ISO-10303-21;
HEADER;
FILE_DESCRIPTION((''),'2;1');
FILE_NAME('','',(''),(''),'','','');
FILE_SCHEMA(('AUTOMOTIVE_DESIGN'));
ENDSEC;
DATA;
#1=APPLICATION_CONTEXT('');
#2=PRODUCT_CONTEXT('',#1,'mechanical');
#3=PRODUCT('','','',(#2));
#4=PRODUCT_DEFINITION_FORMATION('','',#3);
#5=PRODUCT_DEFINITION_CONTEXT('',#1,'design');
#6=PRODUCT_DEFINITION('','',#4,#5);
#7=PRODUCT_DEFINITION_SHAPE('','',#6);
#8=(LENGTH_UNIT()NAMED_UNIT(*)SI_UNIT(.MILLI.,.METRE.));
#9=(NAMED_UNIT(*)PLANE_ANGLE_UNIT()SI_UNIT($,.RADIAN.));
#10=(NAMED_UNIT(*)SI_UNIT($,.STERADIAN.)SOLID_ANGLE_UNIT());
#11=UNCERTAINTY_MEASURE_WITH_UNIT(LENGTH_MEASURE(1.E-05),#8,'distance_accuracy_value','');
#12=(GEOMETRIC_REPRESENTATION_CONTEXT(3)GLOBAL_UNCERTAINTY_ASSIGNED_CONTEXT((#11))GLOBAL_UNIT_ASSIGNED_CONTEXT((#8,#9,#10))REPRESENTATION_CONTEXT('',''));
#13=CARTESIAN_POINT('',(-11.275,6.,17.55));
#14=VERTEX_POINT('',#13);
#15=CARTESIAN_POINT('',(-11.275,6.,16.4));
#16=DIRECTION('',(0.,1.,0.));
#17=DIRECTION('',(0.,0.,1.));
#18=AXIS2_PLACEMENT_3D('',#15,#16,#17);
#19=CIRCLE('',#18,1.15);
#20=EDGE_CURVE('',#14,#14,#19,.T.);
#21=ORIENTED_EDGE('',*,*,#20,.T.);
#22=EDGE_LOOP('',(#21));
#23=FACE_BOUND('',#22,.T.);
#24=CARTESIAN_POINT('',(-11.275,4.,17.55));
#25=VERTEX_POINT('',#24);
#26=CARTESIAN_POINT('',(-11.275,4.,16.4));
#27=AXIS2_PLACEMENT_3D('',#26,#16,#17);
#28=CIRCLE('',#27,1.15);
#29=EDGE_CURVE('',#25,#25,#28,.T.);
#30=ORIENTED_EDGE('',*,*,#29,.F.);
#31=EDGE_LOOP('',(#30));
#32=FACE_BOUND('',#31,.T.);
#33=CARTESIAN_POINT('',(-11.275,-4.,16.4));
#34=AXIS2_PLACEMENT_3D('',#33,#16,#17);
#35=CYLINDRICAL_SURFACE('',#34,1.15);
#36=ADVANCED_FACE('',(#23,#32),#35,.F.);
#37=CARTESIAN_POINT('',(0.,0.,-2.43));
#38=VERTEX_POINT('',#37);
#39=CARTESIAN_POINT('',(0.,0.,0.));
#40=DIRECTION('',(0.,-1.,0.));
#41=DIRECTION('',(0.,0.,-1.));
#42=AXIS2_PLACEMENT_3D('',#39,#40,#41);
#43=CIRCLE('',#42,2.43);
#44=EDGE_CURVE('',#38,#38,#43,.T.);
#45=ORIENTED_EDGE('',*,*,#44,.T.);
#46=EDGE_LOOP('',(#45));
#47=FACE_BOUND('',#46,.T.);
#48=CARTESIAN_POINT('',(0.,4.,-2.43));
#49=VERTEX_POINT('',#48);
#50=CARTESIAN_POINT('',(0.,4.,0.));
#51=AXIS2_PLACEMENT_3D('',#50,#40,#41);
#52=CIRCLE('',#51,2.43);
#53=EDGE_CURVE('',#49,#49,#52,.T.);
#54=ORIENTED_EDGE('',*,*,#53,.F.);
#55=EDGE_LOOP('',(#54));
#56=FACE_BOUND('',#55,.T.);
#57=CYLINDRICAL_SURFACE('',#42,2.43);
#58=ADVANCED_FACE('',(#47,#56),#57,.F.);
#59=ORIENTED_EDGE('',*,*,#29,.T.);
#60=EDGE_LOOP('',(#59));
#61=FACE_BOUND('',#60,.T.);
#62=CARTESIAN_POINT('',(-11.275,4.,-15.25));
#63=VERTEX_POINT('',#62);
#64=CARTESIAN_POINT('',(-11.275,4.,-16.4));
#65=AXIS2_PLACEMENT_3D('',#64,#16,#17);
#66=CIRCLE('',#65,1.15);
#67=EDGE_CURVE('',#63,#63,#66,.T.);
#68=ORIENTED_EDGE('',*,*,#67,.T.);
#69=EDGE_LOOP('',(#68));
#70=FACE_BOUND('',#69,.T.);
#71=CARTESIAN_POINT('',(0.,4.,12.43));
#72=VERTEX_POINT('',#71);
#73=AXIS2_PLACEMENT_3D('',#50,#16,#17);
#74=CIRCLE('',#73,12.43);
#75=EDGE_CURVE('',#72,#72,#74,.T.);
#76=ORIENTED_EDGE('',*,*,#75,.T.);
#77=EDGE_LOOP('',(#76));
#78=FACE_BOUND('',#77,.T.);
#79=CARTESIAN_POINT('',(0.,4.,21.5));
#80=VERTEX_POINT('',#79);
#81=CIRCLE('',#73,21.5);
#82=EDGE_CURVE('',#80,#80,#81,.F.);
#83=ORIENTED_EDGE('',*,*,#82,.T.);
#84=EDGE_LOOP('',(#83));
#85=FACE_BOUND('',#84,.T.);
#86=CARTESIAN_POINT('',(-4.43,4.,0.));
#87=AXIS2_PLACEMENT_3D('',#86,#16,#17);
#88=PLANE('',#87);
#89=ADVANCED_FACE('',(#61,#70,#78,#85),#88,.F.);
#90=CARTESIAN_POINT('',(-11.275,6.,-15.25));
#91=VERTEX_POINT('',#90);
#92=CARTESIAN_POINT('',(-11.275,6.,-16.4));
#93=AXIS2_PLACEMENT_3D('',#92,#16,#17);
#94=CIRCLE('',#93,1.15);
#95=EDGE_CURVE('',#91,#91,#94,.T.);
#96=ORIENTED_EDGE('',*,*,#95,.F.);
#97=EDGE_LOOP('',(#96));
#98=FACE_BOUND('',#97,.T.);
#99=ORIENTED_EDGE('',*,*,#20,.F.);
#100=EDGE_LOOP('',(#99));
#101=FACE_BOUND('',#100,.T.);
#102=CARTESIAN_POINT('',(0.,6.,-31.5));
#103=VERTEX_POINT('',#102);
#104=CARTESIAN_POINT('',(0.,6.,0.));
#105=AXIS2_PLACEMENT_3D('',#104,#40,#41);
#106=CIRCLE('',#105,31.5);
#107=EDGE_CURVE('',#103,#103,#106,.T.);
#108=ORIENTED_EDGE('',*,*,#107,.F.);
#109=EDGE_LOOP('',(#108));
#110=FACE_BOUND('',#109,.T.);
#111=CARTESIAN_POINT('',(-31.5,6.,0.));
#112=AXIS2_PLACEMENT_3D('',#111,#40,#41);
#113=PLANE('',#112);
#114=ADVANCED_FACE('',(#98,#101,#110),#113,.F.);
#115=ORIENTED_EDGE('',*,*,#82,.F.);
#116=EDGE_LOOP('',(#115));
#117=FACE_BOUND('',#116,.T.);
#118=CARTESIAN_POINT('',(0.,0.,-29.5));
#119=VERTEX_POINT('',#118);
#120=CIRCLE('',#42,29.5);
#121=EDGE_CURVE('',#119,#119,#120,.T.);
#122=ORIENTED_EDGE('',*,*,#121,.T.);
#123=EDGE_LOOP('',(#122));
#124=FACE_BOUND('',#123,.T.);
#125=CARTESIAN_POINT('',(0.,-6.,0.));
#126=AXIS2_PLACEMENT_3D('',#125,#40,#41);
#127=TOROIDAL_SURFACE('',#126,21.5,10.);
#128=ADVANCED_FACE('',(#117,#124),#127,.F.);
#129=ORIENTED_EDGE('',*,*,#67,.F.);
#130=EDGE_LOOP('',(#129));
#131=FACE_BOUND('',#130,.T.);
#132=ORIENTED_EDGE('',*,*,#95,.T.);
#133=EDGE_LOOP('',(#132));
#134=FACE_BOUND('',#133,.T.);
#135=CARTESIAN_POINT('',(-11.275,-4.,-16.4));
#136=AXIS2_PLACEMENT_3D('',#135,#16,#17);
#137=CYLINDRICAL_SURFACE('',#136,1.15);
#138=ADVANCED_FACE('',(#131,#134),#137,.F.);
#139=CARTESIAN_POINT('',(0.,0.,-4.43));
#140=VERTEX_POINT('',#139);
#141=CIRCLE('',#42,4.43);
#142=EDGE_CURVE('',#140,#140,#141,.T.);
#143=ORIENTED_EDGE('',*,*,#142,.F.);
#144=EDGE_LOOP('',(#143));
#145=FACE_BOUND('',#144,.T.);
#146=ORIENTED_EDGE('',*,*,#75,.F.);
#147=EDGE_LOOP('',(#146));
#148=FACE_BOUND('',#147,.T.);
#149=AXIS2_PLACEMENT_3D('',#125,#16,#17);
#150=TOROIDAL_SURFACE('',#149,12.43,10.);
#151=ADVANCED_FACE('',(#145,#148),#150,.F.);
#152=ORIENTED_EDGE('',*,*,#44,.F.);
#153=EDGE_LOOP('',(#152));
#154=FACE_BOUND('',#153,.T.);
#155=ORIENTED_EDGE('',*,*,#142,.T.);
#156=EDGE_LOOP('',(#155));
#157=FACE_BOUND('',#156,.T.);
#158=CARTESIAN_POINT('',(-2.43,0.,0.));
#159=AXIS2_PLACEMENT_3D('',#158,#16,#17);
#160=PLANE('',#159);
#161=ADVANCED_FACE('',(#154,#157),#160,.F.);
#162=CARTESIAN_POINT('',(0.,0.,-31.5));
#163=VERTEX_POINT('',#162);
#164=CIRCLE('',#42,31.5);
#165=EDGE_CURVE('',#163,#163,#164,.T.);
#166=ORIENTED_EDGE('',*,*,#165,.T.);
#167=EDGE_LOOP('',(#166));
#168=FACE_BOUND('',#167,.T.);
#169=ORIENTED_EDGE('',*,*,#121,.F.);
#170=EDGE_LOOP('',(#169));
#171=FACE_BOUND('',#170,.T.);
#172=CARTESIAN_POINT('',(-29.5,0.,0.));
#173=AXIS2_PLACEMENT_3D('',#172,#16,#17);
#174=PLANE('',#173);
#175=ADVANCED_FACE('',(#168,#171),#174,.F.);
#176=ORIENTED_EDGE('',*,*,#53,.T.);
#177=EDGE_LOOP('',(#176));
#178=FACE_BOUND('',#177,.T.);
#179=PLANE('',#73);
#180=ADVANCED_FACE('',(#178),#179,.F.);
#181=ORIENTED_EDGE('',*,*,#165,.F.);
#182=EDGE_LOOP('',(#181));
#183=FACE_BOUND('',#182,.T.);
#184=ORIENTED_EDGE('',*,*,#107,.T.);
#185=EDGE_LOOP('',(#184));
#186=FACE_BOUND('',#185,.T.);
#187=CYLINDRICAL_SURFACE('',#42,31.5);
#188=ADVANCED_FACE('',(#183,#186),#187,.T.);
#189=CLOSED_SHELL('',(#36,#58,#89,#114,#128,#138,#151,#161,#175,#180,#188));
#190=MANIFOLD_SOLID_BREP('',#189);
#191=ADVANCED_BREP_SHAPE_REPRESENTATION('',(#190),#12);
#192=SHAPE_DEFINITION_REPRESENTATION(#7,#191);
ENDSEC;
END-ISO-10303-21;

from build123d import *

# Parameters (mm, degrees)
FILLET1_R          = 10
SKETCH6_R          = 1.15
CUT_EXTRUDE1_DEPTH = 10


with BuildPart() as part:
    # Sketch2 → Revolve1 (revolve)
    with BuildSketch(Plane.XY, mode=Mode.PRIVATE) as revolve1_sk:
        Polygon((0, 4), (-2.43, 4), (-2.43, 3), (-2.43, 0), (-4.43, 0), (-4.43, 4), (-29.5, 4), (-29.5, 0), (-31.5, 0), (-31.5, 4), (-31.5, 6), (0, 6), align=None)
    revolve(revolve1_sk.sketch.rotate(Axis((0, 0, 0), (0, 1, 0)), 270), axis=Axis((0, 0, 0), (0, 1, 0)))

    # Fillet1
    # the kernel refuses this fillet: 10 mm, written as the material it adds along each edge
    with BuildSketch(Plane(origin=(0, 4, 0), x_dir=(0, 0, -1), z_dir=(1, 0, 0))) as fillet1_piece_1:
        with BuildLine():
            CenterArc((21.5, -10), FILLET1_R, 36.869897646, 53.130102354)
            Line((29.5, -4), (29.66, -3.88))
            ThreePointArc((29.66, -3.88), (29.7, -2), (29.7, 0))
            Line((29.7, 0), (29.5, 0.2))
            Line((29.5, 0.2), (21.5, 0.2))
            Line((21.5, 0.2), (21.5, 0))
        make_face()
    revolve(axis=Axis((0, 4, 0), (0, 1, 0)))
    with BuildSketch(Plane(origin=(0, 4, 0), x_dir=(0, 0, -1), z_dir=(1, 0, 0))) as fillet1_piece_2:
        with BuildLine():
            CenterArc((12.43, -10), FILLET1_R, 90, 53.130102354)
            Line((12.43, 0), (12.43, 0.2))
            Line((12.43, 0.2), (4.43, 0.2))
            Line((4.43, 0.2), (4.23, 0))
            ThreePointArc((4.23, 0), (4.23, -2), (4.27, -3.88))
            Line((4.27, -3.88), (4.43, -4))
        make_face()
    revolve(axis=Axis((0, 4, 0), (0, 1, 0)))

    # Sketch6 → Cut-Extrude1 (cut)
    with BuildSketch(Plane(origin=(0, 6, 0), x_dir=(1, 0, 0), z_dir=(0, 1, 0))):
        with Locations(Location((-11.275, 16.4, 0), (0, 0, 270))):
            Circle(SKETCH6_R)
        with Locations(Location((-11.275, -16.4, 0), (0, 0, 270))):
            Circle(SKETCH6_R)
    extrude(amount=-CUT_EXTRUDE1_DEPTH, mode=Mode.SUBTRACT)


solid = part.part
